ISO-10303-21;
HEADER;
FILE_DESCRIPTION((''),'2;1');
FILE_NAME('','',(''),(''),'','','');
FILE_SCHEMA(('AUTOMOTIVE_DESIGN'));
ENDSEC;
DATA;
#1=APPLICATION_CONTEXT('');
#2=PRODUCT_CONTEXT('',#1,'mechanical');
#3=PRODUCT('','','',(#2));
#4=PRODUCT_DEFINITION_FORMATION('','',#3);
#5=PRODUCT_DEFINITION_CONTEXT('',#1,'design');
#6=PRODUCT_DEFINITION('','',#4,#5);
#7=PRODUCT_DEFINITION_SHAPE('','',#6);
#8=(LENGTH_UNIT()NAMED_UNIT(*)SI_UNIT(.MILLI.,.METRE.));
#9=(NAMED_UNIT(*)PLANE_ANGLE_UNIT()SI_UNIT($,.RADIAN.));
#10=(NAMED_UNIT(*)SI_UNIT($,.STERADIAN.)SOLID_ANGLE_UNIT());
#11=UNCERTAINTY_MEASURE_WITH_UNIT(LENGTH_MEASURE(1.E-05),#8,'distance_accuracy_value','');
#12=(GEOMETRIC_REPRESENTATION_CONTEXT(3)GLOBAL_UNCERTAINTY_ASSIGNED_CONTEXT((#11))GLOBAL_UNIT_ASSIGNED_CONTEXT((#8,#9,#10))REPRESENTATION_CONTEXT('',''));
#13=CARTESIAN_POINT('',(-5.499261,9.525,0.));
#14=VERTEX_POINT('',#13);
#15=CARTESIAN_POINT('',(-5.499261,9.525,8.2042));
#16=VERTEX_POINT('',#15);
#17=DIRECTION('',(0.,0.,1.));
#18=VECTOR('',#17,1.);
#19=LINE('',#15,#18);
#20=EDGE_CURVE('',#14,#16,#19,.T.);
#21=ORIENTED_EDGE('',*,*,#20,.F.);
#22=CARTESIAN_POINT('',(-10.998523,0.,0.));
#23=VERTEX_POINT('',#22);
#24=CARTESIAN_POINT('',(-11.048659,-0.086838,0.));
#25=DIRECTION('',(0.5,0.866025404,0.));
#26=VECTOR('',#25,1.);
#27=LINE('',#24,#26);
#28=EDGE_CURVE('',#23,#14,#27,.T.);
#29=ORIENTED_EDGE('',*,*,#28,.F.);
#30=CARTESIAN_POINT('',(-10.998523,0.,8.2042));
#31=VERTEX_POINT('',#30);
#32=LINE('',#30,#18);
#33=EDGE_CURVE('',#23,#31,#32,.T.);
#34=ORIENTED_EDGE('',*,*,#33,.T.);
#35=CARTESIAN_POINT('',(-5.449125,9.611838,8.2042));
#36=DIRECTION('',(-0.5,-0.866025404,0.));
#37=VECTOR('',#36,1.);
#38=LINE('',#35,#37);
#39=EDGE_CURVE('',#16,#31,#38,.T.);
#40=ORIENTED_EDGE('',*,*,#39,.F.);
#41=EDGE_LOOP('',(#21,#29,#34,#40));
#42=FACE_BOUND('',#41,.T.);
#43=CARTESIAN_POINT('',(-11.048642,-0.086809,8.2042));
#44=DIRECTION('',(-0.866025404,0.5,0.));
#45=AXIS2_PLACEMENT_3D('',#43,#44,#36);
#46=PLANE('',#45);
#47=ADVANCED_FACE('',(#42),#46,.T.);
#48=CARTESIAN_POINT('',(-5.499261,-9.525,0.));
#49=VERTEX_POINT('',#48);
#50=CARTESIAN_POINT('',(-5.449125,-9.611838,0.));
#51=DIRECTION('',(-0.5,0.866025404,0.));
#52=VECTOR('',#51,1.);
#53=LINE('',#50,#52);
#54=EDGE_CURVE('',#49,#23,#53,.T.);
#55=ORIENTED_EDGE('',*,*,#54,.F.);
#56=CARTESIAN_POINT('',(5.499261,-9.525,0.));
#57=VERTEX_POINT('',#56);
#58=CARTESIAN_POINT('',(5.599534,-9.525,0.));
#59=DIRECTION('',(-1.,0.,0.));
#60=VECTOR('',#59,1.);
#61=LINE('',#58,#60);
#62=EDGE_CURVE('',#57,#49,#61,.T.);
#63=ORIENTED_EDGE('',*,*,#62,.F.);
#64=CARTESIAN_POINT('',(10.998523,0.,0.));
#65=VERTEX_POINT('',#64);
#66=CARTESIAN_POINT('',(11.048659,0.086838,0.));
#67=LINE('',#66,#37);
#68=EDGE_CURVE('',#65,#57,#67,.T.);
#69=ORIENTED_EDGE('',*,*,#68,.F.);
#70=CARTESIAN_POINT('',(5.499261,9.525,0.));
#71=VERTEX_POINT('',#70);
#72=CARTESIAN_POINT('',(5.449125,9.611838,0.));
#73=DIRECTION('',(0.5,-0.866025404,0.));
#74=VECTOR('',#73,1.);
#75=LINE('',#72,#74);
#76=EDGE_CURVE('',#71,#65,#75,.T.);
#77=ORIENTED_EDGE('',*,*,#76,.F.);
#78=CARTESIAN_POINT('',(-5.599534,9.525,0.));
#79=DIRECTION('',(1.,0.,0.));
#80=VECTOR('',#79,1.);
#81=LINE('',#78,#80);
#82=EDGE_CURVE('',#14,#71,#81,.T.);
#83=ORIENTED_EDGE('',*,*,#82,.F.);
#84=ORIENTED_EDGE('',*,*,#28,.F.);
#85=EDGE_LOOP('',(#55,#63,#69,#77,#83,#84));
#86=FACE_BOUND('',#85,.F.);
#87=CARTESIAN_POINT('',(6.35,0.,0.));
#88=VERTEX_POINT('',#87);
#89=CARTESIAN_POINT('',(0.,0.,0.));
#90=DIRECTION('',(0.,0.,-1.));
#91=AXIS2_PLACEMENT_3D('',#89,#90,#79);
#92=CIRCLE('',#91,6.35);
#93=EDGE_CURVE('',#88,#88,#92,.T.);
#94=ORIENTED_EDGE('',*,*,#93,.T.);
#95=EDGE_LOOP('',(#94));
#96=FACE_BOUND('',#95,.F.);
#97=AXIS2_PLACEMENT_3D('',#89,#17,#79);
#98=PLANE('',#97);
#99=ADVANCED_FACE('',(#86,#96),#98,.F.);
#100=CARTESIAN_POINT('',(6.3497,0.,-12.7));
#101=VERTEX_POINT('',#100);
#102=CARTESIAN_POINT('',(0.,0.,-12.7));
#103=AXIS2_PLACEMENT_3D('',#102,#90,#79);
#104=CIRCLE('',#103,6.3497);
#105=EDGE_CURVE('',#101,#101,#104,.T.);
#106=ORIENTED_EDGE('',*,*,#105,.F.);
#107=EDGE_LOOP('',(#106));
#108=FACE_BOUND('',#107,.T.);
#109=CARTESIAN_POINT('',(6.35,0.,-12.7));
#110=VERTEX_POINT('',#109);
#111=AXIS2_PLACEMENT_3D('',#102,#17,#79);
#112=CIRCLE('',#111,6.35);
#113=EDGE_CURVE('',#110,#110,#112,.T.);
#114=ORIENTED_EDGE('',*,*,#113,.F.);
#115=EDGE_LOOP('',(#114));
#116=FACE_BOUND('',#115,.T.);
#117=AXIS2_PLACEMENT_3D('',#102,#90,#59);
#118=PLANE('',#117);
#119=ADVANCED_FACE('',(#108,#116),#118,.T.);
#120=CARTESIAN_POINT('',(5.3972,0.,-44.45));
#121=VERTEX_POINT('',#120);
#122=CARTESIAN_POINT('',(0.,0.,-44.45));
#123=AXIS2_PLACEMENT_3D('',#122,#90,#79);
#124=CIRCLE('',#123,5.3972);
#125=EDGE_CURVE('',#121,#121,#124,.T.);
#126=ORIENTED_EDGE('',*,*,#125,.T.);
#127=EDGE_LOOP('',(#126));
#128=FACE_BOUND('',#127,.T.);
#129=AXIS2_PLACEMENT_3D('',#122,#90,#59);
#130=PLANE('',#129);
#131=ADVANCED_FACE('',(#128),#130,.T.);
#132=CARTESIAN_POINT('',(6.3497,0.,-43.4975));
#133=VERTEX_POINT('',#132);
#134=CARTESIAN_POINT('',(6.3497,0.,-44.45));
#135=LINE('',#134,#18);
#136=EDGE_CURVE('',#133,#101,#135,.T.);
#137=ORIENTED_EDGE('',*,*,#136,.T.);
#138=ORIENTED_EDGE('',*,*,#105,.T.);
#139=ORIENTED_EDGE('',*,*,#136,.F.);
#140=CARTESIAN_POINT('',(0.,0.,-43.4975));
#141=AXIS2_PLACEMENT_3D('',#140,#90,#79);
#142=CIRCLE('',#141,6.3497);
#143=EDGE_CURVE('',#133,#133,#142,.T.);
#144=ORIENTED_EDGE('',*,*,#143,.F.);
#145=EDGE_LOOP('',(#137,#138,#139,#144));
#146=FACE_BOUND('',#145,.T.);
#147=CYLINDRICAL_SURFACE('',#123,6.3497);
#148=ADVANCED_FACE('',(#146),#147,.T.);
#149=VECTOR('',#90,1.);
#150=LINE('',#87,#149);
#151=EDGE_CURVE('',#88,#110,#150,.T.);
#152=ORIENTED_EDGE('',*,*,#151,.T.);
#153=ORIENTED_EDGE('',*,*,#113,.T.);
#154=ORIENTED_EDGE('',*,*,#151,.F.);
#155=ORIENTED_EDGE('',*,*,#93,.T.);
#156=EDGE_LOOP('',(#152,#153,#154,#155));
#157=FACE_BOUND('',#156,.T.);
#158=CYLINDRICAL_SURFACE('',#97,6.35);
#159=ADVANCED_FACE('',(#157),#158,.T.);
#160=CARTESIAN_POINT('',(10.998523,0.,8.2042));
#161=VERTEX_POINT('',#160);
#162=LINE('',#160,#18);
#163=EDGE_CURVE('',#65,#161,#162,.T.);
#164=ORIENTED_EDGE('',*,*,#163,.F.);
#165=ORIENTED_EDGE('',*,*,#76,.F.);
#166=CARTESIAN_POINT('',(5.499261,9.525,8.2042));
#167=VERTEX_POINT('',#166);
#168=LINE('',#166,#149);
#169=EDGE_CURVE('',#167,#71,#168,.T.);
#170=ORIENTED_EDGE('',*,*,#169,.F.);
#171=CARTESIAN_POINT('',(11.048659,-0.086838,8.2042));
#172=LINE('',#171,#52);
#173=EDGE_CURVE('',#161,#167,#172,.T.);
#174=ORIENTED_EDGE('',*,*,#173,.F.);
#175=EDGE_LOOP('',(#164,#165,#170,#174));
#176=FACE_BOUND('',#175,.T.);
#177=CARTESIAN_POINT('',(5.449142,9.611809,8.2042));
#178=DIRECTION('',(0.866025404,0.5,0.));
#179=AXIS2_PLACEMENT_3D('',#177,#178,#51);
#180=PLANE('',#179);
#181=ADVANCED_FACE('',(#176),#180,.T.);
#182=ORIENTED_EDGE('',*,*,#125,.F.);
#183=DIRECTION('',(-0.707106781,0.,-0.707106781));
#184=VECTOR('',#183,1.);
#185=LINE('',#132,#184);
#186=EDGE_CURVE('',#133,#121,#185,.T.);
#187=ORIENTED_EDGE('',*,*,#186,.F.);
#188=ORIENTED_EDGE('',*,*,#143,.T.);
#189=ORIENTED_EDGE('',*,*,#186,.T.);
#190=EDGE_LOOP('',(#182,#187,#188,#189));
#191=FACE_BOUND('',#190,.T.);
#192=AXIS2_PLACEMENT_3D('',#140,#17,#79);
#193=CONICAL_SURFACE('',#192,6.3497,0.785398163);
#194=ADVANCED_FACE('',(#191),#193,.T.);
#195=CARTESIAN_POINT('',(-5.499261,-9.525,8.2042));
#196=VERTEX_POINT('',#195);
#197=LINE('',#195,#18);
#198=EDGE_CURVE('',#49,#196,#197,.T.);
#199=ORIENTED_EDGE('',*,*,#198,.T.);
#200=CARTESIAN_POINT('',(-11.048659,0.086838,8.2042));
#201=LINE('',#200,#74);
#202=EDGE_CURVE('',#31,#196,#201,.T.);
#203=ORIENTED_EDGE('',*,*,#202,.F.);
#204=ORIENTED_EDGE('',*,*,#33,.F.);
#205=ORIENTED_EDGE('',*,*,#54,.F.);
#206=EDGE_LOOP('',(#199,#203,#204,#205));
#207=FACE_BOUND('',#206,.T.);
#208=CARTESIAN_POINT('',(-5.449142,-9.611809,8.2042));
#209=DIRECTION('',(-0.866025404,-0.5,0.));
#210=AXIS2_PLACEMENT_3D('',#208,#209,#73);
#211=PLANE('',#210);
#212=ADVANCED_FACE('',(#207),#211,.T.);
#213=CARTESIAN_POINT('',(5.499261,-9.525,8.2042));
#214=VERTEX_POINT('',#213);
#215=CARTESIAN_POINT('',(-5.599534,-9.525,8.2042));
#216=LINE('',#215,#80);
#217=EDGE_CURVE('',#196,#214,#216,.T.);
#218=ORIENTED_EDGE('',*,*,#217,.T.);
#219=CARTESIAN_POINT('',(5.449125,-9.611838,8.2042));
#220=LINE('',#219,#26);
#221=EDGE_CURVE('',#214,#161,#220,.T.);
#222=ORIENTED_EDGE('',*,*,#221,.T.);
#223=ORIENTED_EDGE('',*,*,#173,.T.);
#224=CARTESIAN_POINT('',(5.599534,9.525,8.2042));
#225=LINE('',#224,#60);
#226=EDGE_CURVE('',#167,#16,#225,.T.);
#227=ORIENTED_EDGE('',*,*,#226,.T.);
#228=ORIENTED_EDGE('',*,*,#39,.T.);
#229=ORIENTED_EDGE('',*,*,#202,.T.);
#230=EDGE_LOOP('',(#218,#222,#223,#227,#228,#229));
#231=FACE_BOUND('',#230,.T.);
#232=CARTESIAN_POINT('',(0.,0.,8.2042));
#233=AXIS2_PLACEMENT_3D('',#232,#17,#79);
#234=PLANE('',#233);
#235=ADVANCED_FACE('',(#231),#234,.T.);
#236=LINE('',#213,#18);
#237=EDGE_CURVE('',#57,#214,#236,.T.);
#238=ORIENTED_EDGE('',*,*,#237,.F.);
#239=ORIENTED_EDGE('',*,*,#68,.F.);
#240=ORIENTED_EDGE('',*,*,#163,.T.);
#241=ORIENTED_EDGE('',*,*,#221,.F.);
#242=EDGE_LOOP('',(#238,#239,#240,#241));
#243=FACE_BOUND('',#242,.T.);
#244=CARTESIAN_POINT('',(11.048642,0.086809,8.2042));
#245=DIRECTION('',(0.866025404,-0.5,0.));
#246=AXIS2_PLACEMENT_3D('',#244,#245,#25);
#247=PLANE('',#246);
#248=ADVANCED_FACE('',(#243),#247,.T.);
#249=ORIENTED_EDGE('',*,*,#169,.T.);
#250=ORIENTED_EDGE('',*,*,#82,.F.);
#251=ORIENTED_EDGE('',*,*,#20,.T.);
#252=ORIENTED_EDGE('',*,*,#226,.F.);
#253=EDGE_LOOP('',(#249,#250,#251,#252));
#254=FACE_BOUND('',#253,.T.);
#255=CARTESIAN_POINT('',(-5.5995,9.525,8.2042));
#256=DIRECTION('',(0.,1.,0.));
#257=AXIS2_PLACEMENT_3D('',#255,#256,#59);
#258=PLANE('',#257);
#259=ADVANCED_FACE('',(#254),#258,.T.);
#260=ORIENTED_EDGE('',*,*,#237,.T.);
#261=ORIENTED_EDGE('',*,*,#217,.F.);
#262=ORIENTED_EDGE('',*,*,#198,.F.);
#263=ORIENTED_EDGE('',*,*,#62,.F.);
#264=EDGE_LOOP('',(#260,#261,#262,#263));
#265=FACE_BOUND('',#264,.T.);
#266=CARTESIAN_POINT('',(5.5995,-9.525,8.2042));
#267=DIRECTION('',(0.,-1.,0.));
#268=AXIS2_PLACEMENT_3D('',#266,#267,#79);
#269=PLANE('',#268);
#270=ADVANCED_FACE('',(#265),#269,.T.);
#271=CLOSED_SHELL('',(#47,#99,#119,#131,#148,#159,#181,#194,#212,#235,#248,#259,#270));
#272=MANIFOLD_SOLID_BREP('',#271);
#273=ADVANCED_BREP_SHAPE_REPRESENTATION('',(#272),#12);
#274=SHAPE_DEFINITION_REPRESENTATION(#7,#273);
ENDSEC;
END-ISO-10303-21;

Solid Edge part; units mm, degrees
sketch "Sketch1" plane through (0, 0, 0) normal (0, 0, 1) x (1, 0, 0)
  circle A0 centre (0, 0) radius 11.049
  dimension "D1" = 22.098
extrude "Protrusion1" add sketch "Sketch1" along normal blind 8.2042
sketch "Sketch2" plane through (0, 0, 0) normal (0, 0, -1) x (1, 0, 0)
  circle A0 centre (0, 0) radius 6.35
extrude "Protrusion2" add sketch "Sketch2" along normal blind 44.45
sketch "Sketch3" plane through (0, 0, -44.45) normal (0, 0, -1) x (1, 0, 0)
  circle A0 centre (0, 0) radius 6.3497
extrude "Cutout1" cut sketch "Sketch3" against normal blind 31.75 flip side to cut
chamfer "Chamfer_1" distance 0.9525 angle 45 1 edges at (-6.3497, 0, -44.45)
sketch "Sketch4" plane through (0, 0, 8.2042) normal (0, 0, 1) x (1, 0, 0)
  line L0 (-5.5995, 9.525) -> (5.5995, 9.525)
  dimension "D1" = 19.05
extrude "Cutout2" cut sketch "Sketch4" against normal up to next material side at (0, 9.575, 8.2042)
pattern_circular "Pattern1" count 6 over 360 about axis through (0, 0, 8.2042) along (0, 0, 1) of "Cutout2"
properties part number "24103849"
